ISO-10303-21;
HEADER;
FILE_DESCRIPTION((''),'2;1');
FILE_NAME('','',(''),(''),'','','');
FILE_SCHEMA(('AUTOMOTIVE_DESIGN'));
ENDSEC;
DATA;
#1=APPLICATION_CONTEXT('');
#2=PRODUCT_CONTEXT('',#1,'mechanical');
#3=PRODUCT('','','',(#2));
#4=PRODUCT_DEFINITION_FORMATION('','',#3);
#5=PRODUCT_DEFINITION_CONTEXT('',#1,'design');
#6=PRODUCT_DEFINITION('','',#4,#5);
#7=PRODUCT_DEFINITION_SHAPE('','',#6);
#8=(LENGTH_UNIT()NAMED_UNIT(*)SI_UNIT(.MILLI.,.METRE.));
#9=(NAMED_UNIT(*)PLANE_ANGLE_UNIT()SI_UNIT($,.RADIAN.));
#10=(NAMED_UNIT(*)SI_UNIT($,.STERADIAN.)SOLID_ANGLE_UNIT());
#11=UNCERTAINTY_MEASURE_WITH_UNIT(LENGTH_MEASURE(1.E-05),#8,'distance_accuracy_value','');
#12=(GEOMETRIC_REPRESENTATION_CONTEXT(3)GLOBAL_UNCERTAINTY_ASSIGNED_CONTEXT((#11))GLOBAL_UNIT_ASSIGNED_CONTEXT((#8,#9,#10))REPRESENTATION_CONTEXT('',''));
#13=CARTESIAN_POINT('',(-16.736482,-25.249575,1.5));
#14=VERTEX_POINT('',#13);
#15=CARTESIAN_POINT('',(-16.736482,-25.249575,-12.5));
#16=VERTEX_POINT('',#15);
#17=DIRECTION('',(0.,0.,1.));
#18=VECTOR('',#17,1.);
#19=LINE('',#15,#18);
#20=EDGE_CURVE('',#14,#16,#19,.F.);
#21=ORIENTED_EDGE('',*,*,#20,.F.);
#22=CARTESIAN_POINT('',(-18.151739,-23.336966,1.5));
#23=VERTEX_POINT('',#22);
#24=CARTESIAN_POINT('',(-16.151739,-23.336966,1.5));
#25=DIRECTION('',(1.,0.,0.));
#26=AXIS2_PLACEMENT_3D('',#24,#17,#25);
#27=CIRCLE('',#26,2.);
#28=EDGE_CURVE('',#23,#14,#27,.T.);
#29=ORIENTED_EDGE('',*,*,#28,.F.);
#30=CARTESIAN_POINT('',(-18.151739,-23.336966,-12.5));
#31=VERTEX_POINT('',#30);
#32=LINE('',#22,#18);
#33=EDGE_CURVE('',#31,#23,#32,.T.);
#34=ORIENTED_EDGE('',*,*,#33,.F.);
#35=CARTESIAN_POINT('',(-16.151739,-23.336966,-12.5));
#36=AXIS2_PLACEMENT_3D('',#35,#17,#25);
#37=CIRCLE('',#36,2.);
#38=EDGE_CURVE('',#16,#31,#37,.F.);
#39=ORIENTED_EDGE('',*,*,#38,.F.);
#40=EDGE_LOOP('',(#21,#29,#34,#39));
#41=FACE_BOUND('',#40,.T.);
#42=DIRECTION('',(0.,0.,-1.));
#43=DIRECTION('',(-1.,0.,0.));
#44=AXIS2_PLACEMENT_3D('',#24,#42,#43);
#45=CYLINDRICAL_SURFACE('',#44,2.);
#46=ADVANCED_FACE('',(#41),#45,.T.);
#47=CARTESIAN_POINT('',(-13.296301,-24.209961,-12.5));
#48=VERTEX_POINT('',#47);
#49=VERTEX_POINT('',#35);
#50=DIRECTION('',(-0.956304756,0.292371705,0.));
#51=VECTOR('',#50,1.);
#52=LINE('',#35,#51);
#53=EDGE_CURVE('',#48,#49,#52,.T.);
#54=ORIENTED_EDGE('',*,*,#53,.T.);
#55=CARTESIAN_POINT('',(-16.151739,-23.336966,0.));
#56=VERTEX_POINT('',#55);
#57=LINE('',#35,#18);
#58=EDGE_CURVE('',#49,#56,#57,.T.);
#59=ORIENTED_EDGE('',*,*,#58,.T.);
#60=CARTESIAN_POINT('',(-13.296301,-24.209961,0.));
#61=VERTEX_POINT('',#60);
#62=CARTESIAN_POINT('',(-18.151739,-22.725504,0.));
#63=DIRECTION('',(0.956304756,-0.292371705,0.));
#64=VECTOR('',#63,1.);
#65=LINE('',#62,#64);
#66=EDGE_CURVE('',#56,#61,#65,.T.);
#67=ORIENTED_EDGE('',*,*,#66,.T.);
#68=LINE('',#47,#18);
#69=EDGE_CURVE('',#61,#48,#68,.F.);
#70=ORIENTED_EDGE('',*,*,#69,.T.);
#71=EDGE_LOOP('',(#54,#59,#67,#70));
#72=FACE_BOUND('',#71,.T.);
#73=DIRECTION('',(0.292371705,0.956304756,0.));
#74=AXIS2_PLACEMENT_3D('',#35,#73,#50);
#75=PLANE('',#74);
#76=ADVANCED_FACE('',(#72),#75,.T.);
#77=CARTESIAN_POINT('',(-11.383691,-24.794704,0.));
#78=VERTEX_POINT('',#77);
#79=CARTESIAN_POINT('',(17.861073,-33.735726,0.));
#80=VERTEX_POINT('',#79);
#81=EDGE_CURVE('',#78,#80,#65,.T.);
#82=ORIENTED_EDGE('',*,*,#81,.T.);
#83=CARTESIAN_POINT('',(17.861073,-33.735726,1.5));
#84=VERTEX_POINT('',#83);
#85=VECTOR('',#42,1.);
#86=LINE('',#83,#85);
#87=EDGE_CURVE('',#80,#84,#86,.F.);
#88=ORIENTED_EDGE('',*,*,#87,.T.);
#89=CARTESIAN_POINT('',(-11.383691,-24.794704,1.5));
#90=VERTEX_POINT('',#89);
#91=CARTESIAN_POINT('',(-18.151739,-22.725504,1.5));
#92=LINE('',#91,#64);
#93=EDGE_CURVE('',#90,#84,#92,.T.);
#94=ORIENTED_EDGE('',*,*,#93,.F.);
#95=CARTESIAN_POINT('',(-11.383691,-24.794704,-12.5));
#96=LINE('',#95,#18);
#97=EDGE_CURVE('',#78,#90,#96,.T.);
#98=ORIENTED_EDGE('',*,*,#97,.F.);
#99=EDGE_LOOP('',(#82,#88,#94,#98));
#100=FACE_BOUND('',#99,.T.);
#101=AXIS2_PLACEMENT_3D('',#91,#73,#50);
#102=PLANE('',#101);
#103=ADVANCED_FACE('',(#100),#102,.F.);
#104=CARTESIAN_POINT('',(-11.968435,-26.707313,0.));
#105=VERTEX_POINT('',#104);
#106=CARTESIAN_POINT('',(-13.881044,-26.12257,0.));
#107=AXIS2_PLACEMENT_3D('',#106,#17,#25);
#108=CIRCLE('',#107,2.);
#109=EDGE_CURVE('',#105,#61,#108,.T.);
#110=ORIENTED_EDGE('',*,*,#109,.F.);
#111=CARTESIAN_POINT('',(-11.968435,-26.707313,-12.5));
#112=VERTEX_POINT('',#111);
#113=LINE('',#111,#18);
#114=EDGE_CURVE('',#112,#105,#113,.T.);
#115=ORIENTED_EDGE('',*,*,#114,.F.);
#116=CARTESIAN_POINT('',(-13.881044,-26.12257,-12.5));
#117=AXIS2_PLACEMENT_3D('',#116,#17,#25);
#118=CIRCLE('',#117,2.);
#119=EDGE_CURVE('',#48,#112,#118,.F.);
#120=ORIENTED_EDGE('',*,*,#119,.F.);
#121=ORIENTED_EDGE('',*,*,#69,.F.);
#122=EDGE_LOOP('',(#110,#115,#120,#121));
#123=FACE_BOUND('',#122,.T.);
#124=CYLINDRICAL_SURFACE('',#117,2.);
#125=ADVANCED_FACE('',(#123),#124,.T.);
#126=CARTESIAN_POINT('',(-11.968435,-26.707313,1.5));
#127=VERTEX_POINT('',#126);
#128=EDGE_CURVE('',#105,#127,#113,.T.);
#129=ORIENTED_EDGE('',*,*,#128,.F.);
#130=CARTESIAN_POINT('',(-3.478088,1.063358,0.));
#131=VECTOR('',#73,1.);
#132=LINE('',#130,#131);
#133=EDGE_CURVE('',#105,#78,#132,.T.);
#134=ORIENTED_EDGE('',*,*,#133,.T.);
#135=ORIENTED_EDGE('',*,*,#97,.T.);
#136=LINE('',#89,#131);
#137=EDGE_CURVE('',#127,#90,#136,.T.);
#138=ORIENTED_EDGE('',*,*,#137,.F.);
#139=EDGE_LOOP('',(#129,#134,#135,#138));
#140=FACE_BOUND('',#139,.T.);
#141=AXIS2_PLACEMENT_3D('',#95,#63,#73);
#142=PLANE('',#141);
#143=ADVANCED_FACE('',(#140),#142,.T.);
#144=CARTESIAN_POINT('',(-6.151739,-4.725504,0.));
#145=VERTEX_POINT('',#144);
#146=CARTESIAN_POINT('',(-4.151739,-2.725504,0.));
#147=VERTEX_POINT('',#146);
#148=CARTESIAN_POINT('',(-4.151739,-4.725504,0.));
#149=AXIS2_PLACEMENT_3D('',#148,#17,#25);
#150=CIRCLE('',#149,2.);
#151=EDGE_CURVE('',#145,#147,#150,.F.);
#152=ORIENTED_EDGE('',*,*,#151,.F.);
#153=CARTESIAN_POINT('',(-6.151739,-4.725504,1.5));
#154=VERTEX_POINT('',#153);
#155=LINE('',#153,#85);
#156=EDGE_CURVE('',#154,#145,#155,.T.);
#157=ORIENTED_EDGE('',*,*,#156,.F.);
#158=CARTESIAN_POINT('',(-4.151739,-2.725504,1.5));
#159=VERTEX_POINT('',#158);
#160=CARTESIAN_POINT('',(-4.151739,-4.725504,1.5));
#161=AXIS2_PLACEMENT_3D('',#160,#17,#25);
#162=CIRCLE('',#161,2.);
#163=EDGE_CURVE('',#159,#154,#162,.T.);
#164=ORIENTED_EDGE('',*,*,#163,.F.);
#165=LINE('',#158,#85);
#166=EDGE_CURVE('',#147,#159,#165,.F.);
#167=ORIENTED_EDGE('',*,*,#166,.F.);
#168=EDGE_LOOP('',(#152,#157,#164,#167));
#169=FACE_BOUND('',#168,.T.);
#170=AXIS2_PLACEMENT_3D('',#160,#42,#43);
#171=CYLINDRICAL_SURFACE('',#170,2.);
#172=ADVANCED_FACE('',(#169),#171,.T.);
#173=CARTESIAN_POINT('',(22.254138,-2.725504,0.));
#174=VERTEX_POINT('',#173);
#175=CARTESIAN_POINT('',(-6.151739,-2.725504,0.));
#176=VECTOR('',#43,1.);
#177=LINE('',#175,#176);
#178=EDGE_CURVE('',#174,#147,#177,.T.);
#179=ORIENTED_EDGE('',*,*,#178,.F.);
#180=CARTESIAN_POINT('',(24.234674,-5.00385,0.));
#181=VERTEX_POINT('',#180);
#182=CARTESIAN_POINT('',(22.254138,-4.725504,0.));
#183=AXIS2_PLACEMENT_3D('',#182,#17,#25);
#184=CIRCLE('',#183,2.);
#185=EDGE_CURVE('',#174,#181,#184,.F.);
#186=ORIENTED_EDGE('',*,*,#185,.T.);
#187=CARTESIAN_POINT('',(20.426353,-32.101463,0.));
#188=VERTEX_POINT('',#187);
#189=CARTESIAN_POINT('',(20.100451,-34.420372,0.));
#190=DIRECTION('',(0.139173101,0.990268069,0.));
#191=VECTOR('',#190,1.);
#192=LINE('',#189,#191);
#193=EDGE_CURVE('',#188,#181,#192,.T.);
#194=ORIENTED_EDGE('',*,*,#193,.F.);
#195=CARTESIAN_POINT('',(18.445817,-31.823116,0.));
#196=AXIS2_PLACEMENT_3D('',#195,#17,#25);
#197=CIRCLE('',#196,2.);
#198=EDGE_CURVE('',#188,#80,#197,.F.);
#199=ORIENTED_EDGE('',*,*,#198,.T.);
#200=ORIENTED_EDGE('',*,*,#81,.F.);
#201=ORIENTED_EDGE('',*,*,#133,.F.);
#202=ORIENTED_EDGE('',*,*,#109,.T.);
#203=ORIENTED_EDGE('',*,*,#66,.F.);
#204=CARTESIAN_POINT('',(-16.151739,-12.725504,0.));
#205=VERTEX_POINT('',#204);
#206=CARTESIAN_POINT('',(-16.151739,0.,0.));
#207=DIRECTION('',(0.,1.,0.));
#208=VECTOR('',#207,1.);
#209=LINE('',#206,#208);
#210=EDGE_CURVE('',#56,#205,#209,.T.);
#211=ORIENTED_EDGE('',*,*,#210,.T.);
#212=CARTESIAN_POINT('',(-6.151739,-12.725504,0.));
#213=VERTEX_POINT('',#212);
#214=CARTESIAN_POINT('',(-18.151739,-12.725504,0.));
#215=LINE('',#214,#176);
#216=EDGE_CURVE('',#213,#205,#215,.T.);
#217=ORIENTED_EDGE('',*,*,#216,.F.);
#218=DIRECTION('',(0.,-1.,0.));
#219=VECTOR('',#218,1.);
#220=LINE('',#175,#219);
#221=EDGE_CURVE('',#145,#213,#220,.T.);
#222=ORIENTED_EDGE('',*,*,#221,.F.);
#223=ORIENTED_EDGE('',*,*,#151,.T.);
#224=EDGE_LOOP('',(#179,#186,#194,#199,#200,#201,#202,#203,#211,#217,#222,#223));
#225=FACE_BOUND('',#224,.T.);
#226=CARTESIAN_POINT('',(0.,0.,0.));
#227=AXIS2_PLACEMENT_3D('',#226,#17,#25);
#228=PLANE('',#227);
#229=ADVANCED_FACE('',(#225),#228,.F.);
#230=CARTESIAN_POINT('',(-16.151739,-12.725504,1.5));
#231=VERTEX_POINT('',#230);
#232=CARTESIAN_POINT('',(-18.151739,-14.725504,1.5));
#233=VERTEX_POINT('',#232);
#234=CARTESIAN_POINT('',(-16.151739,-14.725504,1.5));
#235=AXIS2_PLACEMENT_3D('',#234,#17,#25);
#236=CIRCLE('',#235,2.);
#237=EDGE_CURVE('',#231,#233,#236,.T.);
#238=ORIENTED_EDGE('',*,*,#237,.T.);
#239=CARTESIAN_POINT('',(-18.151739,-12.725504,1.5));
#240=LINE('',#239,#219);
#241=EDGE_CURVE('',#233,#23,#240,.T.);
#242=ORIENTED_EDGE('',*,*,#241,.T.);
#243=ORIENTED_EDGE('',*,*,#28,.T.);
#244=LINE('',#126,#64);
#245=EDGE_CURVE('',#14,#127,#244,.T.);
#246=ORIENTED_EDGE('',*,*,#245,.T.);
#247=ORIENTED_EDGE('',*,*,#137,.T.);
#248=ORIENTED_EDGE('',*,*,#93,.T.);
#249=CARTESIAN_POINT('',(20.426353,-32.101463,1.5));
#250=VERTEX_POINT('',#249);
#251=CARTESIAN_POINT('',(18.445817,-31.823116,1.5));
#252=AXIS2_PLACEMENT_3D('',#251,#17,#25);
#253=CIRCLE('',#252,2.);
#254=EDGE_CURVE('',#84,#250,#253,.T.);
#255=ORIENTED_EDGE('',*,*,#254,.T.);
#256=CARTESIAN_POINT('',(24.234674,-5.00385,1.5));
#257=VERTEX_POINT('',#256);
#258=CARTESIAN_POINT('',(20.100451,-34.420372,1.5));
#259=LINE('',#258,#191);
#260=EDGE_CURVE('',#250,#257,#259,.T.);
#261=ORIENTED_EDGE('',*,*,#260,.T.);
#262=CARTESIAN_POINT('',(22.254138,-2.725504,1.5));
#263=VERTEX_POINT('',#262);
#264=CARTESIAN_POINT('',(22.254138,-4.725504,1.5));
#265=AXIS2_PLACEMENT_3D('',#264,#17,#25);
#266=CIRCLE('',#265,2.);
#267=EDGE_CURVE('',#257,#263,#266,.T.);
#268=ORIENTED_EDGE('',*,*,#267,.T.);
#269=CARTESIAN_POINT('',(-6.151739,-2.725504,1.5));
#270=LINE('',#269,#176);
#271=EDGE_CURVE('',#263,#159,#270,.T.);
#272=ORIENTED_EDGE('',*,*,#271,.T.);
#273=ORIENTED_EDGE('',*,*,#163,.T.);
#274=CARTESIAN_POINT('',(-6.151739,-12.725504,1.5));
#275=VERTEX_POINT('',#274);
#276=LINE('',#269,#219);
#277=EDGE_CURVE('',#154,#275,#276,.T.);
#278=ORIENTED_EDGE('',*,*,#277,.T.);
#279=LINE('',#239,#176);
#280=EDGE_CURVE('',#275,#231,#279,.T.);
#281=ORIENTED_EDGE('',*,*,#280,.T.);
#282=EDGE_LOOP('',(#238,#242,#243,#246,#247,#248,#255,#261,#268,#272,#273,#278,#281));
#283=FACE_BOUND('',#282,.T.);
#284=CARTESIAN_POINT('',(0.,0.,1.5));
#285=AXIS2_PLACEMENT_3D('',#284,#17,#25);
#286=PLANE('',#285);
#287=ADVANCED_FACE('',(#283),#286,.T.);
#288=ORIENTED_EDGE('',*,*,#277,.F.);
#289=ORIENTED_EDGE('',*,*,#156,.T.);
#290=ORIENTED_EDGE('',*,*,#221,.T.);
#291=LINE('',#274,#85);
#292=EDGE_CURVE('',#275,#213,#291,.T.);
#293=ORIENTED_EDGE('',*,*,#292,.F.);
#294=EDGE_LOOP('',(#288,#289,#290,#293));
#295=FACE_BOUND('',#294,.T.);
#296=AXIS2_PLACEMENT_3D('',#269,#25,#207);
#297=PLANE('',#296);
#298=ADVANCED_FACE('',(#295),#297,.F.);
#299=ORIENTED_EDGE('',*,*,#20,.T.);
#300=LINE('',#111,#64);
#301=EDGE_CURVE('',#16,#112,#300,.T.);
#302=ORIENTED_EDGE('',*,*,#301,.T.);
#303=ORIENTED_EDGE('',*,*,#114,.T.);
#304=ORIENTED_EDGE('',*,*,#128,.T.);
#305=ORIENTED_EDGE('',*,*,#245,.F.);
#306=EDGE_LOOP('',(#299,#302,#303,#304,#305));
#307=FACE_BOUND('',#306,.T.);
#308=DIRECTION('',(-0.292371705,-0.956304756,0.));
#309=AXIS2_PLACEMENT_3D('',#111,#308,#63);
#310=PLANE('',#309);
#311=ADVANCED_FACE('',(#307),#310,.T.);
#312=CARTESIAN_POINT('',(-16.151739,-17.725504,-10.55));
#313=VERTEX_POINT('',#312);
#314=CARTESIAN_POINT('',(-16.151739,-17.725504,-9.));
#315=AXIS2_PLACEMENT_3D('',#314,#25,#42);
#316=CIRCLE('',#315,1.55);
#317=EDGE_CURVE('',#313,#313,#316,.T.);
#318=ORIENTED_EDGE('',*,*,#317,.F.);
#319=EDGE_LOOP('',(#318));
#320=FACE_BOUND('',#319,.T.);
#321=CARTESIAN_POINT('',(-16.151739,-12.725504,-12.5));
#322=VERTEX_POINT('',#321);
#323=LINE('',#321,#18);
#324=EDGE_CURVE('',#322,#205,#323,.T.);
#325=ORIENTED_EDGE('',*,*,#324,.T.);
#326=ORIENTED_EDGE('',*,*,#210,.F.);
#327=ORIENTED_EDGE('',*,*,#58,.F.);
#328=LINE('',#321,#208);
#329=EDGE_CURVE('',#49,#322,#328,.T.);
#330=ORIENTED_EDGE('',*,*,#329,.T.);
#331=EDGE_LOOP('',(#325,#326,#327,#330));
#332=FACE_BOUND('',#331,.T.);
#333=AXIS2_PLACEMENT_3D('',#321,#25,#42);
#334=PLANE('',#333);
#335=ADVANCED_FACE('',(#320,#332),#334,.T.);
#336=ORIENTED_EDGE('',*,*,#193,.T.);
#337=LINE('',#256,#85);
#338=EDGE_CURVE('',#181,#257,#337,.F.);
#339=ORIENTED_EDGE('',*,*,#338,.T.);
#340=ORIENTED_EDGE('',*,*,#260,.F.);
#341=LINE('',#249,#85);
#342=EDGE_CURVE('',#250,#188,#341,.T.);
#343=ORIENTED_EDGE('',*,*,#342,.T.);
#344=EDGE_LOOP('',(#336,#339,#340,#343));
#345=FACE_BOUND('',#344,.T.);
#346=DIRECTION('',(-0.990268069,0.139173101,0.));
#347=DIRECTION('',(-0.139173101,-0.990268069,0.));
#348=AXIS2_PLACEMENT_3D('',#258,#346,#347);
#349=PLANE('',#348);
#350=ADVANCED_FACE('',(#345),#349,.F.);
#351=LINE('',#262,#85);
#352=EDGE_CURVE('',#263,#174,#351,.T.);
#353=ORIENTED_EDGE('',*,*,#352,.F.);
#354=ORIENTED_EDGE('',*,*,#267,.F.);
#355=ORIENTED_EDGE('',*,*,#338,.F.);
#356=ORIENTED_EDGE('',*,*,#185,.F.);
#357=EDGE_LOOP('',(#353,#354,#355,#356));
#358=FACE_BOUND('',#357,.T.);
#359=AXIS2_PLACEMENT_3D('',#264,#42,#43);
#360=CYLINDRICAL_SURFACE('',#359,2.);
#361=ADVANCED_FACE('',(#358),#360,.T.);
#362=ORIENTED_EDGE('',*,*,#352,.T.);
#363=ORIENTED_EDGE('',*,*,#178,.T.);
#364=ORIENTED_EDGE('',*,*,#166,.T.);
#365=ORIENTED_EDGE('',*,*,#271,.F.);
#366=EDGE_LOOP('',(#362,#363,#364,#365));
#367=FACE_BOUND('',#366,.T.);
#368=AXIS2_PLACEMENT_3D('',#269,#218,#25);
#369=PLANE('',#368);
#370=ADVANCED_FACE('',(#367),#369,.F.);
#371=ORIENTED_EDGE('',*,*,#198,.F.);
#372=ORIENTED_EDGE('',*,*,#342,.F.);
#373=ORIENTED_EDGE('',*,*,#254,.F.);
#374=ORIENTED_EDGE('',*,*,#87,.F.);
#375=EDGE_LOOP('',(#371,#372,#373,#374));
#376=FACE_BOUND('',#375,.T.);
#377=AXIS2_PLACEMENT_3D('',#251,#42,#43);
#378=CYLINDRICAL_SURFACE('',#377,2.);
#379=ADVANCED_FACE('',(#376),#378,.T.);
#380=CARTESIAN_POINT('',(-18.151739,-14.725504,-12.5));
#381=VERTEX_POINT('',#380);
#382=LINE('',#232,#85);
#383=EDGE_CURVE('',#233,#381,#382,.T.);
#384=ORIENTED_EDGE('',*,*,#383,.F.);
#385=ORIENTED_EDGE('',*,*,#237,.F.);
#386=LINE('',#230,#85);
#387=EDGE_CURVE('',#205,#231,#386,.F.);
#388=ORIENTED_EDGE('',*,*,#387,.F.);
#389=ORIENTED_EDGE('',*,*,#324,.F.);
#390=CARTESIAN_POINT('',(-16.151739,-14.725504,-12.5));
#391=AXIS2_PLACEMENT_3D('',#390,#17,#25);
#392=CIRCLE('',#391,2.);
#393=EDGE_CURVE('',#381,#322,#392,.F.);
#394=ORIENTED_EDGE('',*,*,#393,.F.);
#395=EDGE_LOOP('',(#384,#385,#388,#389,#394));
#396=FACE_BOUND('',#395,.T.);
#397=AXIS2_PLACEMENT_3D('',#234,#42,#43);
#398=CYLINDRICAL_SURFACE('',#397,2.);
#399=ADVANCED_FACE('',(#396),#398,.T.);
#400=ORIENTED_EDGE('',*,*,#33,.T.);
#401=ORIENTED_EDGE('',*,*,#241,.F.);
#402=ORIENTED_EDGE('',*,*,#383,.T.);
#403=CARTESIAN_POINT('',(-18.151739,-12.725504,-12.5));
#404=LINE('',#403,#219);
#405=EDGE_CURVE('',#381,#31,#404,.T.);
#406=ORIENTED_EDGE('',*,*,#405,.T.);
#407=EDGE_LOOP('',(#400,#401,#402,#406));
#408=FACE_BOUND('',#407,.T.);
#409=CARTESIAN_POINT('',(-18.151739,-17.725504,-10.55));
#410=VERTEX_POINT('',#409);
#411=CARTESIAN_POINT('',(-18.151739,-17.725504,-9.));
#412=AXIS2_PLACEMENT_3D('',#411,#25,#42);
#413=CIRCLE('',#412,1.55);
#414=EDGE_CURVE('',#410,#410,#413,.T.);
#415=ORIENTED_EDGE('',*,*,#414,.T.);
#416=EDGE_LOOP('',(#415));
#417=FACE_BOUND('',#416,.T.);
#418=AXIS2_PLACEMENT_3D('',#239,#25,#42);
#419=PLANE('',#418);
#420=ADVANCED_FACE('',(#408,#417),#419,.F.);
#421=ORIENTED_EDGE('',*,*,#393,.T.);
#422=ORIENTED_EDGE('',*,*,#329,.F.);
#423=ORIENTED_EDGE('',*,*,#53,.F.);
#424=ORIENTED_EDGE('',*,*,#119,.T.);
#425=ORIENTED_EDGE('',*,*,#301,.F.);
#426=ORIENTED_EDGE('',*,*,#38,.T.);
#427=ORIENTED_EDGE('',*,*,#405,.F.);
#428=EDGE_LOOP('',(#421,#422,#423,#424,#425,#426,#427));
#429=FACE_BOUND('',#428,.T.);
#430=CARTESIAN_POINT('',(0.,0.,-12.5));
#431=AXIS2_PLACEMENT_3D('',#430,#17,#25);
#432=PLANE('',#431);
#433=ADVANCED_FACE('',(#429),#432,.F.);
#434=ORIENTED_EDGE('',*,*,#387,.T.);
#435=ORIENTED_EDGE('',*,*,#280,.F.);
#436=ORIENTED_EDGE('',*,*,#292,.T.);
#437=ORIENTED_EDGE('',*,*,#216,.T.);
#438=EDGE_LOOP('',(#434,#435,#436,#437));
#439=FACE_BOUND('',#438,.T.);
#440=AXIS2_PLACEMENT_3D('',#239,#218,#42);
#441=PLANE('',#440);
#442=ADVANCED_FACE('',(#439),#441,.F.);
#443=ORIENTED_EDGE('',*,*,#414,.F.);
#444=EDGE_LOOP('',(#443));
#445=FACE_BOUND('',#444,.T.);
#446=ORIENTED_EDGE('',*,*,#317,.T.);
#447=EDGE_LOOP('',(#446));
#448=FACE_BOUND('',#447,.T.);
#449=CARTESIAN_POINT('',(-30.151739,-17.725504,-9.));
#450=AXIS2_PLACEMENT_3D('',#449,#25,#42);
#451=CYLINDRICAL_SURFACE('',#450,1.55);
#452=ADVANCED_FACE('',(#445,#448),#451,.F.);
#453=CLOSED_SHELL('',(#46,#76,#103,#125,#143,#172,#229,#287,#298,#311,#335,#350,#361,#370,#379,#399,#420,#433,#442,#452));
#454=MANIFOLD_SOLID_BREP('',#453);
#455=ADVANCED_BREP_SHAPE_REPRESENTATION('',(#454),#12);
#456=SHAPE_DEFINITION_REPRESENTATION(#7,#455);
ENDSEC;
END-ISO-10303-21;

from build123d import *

# Parameters (mm, degrees)
BOSS_EXTRUDE1_DEPTH = 1.5
BOSS_EXTRUDE3_DEPTH = 14
SKETCH6_R           = 1.55
CUT_EXTRUDE1_DEPTH  = 14
FILLET1_R           = 2


with BuildPart() as part:
    # Sketch1 → Boss-Extrude1 (new body)
    with BuildSketch(Plane.XY):
        Polygon((-6.151738777, -2.72550419), (24.554874692, -2.72550419), (20.100451461, -34.420372379), (-18.151738777, -22.72550419), (-18.151738777, -12.72550419), (-6.151738777, -12.72550419), align=None)
    extrude(amount=BOSS_EXTRUDE1_DEPTH)

    # Sketch5 → Boss-Extrude3 (add)
    with BuildSketch(Plane.XY.offset(1.5)):
        Polygon((-16.151738777, -23.336965553), (-11.383691284, -24.794703962), (-11.968434693, -26.707313474), (-18.151738777, -24.816887703), (-18.151738777, -12.72550419), (-16.151738777, -12.72550419), align=None)
    extrude(amount=-BOSS_EXTRUDE3_DEPTH)

    # Sketch6 → Cut-Extrude1 (cut)
    with BuildSketch(Plane(origin=(-16.151738777, 0, 0), x_dir=(0, 0, -1), z_dir=(1, 0, 0))):
        with Locations((9, -17.72550419)):
            Circle(SKETCH6_R)
    extrude(amount=-CUT_EXTRUDE1_DEPTH, mode=Mode.SUBTRACT)

    # Fillet1
    fillet1_edges = [part.edges().sort_by_distance(p)[0] for p in [
        (-18.151738777, -12.72550419, -5.5),
        (-11.383691284, -24.794703962, -6.25),
        (-18.151738777, -24.816887703, -5.5),
        (20.100451461, -34.420372379, 0.75),
        (-6.151738777, -2.72550419, 0.75),
        (24.554874692, -2.72550419, 0.75),
    ]]
    fillet(fillet1_edges, radius=FILLET1_R - 0.0001)  # a hair under: the kernel refuses the full size


solid = part.part
